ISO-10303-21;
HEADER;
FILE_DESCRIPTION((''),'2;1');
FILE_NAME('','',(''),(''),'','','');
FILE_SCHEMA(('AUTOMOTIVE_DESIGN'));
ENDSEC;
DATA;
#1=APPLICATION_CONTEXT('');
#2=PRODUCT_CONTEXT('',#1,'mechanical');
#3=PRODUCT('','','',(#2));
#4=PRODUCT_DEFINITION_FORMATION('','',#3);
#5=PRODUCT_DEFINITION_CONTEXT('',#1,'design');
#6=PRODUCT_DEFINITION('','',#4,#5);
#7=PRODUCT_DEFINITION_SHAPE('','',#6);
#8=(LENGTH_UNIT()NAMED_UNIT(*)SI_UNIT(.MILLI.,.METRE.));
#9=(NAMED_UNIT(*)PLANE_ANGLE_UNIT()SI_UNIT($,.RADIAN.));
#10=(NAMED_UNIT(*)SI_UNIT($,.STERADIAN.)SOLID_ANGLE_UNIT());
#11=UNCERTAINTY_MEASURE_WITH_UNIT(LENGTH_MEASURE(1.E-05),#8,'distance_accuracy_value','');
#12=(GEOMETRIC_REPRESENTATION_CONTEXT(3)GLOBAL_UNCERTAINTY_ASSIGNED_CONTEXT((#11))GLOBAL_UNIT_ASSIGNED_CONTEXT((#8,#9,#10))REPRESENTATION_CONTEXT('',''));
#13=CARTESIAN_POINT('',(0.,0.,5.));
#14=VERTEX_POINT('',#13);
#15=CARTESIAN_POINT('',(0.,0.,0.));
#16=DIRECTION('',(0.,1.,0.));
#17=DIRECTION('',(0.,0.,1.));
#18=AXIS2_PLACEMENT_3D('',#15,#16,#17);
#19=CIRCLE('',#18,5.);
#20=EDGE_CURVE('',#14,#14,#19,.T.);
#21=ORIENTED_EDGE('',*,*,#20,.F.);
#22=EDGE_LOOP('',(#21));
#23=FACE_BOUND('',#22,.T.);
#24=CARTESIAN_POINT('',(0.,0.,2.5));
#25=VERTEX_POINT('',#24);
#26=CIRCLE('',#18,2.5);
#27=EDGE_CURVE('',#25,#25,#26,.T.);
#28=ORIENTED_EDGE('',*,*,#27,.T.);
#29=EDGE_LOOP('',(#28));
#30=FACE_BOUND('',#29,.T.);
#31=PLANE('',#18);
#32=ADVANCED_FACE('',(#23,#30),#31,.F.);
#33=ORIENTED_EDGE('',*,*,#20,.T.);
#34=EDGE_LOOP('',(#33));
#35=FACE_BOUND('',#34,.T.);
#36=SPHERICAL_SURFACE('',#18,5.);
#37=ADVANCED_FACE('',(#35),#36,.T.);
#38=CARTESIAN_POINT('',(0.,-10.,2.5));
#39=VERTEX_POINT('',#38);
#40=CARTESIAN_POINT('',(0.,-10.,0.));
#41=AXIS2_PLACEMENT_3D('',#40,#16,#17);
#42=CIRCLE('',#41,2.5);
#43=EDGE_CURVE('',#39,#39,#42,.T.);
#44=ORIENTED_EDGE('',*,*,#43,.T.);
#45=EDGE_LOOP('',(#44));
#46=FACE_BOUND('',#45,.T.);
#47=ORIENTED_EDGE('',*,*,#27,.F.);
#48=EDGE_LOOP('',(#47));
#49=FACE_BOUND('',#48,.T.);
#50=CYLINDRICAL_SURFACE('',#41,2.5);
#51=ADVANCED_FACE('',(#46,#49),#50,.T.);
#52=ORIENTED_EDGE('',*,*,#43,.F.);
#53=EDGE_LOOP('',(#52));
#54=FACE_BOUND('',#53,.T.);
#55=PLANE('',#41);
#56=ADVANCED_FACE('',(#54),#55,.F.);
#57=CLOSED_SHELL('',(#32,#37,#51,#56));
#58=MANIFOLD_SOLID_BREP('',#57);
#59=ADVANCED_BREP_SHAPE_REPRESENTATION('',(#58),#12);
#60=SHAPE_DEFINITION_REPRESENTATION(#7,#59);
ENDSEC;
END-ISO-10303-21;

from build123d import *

# Parameters (mm, degrees)
SKETCH1_R           = 2.5
BOSS_EXTRUDE1_DEPTH = 10
SKETCH2_R           = 5
BOSS_EXTRUDE2_DEPTH = 5
FILLET1_R           = 5


with BuildPart() as part:
    # Sketch1 → Boss-Extrude1 (new body)
    with BuildSketch(Plane(origin=(0, 0, 0), x_dir=(1, 0, 0), z_dir=(0, 1, 0))):
        with Locations(Location((0, 0, 0), (0, 0, 270))):
            Circle(SKETCH1_R)
    extrude(amount=-BOSS_EXTRUDE1_DEPTH)

    # Sketch2 → Boss-Extrude2 (add)
    with BuildSketch(Plane(origin=(0, 0, 0), x_dir=(1, 0, 0), z_dir=(0, 1, 0))):
        with Locations(Location((0, 0, 0), (0, 0, 270))):
            Circle(SKETCH2_R)
    extrude(amount=BOSS_EXTRUDE2_DEPTH)

    # Fillet1
    fillet1_edges = [part.edges().sort_by_distance(p)[0] for p in [
        (0, 5, -5),
    ]]
    fillet(fillet1_edges, radius=FILLET1_R - 0.0001)  # a hair under: the kernel refuses the full size


solid = part.part
